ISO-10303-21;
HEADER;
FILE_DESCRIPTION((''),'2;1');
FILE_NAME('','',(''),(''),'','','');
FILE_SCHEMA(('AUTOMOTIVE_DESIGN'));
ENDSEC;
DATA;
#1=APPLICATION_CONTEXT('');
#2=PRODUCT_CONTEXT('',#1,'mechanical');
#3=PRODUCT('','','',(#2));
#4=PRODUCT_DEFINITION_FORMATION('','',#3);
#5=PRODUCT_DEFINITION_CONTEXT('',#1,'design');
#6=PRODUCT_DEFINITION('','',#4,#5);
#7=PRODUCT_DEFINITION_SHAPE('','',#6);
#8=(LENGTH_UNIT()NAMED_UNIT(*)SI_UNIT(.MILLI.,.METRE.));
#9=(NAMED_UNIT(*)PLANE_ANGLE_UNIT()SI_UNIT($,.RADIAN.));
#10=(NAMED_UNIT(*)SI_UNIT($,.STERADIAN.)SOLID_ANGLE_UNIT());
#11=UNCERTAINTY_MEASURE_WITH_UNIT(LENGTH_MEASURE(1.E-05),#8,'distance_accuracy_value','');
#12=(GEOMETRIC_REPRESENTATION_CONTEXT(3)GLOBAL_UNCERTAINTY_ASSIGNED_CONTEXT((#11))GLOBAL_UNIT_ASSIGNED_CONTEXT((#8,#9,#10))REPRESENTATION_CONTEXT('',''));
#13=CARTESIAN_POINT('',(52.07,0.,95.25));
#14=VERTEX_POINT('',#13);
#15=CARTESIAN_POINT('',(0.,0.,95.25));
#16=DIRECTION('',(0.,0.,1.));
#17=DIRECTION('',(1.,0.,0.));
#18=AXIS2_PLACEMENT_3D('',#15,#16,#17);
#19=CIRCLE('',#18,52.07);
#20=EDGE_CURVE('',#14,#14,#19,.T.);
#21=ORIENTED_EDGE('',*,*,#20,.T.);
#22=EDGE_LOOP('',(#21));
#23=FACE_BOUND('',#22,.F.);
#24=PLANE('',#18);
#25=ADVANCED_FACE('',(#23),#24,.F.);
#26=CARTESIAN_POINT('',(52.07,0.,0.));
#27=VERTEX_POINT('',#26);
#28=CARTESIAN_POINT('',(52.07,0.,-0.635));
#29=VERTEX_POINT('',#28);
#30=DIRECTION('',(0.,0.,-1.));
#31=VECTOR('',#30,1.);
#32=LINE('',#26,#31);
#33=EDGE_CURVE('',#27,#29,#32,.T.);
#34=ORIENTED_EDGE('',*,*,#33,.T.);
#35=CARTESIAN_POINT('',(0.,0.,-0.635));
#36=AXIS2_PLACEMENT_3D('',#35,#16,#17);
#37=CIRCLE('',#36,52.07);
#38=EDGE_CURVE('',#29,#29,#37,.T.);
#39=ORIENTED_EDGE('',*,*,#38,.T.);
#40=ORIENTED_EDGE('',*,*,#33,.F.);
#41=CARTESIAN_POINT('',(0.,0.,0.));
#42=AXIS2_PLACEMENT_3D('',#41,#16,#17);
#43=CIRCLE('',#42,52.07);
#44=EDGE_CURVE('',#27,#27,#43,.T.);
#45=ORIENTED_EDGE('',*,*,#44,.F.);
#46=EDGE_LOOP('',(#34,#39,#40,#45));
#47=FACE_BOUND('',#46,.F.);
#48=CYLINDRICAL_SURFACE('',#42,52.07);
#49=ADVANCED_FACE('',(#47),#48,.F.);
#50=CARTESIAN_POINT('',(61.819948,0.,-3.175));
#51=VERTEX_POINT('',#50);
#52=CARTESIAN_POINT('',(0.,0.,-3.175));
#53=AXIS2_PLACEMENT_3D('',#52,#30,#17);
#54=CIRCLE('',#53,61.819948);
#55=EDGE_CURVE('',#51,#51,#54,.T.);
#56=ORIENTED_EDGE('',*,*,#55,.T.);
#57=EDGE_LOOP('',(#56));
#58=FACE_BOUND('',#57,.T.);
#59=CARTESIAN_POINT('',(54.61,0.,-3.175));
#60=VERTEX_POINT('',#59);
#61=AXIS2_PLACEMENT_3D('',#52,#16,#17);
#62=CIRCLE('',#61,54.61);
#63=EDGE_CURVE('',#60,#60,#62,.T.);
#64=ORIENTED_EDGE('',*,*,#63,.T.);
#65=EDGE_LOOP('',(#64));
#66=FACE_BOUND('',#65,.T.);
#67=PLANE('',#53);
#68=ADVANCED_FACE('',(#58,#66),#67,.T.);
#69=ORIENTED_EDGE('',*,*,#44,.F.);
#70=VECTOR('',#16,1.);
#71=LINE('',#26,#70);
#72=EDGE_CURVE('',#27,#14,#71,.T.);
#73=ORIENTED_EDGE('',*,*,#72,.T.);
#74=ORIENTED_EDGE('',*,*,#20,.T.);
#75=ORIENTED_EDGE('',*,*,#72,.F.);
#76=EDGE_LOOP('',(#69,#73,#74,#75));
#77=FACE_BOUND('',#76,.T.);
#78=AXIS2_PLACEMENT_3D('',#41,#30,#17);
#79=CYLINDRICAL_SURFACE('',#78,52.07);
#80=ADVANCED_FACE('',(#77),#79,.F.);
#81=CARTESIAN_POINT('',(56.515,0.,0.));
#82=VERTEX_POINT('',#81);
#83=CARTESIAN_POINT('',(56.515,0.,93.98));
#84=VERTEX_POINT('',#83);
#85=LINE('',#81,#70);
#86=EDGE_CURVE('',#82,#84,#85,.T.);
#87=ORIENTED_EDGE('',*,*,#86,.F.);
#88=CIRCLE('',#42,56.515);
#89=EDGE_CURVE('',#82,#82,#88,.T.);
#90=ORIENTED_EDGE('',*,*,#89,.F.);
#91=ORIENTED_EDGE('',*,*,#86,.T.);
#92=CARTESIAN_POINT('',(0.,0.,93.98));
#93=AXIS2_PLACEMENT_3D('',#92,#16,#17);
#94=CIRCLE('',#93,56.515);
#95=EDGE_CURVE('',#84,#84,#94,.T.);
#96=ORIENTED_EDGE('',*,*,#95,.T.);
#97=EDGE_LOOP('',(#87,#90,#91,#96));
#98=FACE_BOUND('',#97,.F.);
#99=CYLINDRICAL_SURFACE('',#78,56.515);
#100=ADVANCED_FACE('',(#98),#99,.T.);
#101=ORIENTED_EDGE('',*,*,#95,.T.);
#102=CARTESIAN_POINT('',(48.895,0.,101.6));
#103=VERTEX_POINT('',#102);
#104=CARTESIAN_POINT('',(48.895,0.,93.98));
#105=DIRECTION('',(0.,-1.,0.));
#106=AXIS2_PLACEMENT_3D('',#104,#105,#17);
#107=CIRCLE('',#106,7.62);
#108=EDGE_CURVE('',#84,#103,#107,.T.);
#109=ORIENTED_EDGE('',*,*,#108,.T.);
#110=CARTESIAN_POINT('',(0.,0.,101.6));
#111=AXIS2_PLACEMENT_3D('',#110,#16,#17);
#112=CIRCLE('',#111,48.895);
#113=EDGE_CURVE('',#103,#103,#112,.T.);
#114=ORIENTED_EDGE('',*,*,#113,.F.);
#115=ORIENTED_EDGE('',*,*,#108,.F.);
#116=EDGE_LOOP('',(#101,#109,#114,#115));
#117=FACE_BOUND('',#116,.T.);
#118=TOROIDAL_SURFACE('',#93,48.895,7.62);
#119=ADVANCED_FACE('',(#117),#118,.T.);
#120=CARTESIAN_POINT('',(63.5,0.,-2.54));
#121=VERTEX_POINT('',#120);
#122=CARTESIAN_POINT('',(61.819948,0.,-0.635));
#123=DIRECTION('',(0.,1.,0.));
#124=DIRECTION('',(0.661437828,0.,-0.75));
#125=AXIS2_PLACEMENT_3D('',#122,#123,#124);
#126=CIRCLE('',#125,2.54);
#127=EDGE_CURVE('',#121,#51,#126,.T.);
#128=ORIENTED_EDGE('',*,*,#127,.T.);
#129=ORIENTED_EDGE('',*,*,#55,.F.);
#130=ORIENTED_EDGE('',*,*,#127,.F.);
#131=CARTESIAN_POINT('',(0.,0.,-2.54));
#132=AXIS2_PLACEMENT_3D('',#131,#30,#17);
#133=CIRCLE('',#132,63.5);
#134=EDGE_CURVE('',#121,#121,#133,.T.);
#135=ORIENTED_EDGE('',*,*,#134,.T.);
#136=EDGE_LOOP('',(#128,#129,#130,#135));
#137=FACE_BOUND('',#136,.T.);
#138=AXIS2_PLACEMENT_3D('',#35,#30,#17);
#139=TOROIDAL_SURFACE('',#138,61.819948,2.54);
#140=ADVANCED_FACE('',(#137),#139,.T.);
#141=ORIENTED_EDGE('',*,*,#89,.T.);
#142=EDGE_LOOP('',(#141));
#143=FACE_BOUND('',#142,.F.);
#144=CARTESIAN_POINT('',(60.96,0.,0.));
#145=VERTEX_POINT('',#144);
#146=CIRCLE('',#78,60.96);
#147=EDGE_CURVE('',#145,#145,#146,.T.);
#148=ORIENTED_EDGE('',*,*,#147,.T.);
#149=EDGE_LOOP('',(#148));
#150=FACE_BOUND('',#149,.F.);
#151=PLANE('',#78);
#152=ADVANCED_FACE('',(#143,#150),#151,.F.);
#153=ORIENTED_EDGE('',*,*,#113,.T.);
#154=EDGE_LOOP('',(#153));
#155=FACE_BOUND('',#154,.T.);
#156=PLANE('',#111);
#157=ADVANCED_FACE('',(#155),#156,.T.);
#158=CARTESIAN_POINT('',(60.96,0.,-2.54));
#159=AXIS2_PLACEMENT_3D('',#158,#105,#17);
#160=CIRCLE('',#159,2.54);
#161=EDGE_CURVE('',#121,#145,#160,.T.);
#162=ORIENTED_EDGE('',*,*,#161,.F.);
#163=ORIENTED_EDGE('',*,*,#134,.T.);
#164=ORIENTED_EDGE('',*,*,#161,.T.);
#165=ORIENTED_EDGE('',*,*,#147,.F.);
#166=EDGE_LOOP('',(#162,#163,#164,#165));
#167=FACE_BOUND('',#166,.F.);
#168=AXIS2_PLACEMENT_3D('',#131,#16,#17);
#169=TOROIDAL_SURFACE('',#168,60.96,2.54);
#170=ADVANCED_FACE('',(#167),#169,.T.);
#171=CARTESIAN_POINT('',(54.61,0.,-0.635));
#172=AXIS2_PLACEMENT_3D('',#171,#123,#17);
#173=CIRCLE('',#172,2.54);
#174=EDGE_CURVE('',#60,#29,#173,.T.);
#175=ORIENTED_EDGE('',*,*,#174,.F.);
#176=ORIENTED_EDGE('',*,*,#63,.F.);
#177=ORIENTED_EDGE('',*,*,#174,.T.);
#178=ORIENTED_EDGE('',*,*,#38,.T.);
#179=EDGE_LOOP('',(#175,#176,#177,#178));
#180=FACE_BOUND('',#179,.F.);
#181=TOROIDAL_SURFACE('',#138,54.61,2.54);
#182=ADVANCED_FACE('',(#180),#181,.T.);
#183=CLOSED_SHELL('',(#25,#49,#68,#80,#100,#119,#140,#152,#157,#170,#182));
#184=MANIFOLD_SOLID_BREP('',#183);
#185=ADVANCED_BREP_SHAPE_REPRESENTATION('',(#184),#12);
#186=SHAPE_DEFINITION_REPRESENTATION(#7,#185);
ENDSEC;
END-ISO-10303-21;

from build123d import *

# Parameters (mm, degrees)
F0_R     = 56.515
F1_DEPTH = 101.6
F2_R     = 52.07
F3_DEPTH = 95.25
F4_R     = 63.5
F5_DEPTH = 3.175
F6_R     = 52.07
F7_DEPTH = 12.7
F8_R     = 7.62
F9_R     = 2.54
F10_R    = 2.54


# Not quite as in the source:
# - a fillet or chamfer that OpenCascade refuses, or shapes differently, is made with other operations: its cross-section is extruded or revolved along the edge and cut away or added


with BuildPart() as f1:
    # F0 (on Top) → F1 (new body)
    with BuildSketch(Plane.XY):
        Circle(F0_R)
    extrude(amount=F1_DEPTH)

    # F2 (on Top) → F3 (cut)
    with BuildSketch(Plane.XY):
        Circle(F2_R)
    extrude(amount=F3_DEPTH, mode=Mode.SUBTRACT)

    # F4 (on face) → F5 (join)
    with BuildSketch(Plane(origin=(0, 0, 0), x_dir=(1, 0, 0), z_dir=(0, 0, -1))):
        Circle(F4_R)
    extrude(amount=F5_DEPTH)

    # F6 (on Top) → F7 (cut)
    with BuildSketch(Plane.XY):
        Circle(F6_R)
    extrude(amount=-F7_DEPTH, mode=Mode.SUBTRACT)

    # F8
    f8_edges = [f1.edges().sort_by_distance(p)[0] for p in [
        (-56.515, 0, 101.6),
    ]]
    fillet(f8_edges, radius=F8_R)

    # F9
    f9_edges = [f1.edges().sort_by_distance(p)[0] for p in [
        (-52.07, 0, -3.175),
    ]]
    fillet(f9_edges, radius=F9_R)

    # F10
    f10_edges = [f1.edges().sort_by_distance(p)[0] for p in [
        (-63.5, 0, 0),
    ]]
    fillet(f10_edges, radius=F10_R)

    # F11: fillet of radius 2.54 on 1 edges, made by hand

    # F11_s1 → F11_t2 (revolve, cut)
    with BuildSketch(Plane.XZ):
        with BuildLine():
            ThreePointArc((63.5, -2.54), (62.7179735296, -3.0109524406), (61.8199479175, -3.175))
            Line((61.8199479175, -3.175), (63.5, -3.175))
            Line((63.5, -3.175), (63.5, -2.54))
        make_face()
    revolve(axis=Axis((0, 0, -3.175), (0, 0, -1)), mode=Mode.SUBTRACT)


solid = f1.part
